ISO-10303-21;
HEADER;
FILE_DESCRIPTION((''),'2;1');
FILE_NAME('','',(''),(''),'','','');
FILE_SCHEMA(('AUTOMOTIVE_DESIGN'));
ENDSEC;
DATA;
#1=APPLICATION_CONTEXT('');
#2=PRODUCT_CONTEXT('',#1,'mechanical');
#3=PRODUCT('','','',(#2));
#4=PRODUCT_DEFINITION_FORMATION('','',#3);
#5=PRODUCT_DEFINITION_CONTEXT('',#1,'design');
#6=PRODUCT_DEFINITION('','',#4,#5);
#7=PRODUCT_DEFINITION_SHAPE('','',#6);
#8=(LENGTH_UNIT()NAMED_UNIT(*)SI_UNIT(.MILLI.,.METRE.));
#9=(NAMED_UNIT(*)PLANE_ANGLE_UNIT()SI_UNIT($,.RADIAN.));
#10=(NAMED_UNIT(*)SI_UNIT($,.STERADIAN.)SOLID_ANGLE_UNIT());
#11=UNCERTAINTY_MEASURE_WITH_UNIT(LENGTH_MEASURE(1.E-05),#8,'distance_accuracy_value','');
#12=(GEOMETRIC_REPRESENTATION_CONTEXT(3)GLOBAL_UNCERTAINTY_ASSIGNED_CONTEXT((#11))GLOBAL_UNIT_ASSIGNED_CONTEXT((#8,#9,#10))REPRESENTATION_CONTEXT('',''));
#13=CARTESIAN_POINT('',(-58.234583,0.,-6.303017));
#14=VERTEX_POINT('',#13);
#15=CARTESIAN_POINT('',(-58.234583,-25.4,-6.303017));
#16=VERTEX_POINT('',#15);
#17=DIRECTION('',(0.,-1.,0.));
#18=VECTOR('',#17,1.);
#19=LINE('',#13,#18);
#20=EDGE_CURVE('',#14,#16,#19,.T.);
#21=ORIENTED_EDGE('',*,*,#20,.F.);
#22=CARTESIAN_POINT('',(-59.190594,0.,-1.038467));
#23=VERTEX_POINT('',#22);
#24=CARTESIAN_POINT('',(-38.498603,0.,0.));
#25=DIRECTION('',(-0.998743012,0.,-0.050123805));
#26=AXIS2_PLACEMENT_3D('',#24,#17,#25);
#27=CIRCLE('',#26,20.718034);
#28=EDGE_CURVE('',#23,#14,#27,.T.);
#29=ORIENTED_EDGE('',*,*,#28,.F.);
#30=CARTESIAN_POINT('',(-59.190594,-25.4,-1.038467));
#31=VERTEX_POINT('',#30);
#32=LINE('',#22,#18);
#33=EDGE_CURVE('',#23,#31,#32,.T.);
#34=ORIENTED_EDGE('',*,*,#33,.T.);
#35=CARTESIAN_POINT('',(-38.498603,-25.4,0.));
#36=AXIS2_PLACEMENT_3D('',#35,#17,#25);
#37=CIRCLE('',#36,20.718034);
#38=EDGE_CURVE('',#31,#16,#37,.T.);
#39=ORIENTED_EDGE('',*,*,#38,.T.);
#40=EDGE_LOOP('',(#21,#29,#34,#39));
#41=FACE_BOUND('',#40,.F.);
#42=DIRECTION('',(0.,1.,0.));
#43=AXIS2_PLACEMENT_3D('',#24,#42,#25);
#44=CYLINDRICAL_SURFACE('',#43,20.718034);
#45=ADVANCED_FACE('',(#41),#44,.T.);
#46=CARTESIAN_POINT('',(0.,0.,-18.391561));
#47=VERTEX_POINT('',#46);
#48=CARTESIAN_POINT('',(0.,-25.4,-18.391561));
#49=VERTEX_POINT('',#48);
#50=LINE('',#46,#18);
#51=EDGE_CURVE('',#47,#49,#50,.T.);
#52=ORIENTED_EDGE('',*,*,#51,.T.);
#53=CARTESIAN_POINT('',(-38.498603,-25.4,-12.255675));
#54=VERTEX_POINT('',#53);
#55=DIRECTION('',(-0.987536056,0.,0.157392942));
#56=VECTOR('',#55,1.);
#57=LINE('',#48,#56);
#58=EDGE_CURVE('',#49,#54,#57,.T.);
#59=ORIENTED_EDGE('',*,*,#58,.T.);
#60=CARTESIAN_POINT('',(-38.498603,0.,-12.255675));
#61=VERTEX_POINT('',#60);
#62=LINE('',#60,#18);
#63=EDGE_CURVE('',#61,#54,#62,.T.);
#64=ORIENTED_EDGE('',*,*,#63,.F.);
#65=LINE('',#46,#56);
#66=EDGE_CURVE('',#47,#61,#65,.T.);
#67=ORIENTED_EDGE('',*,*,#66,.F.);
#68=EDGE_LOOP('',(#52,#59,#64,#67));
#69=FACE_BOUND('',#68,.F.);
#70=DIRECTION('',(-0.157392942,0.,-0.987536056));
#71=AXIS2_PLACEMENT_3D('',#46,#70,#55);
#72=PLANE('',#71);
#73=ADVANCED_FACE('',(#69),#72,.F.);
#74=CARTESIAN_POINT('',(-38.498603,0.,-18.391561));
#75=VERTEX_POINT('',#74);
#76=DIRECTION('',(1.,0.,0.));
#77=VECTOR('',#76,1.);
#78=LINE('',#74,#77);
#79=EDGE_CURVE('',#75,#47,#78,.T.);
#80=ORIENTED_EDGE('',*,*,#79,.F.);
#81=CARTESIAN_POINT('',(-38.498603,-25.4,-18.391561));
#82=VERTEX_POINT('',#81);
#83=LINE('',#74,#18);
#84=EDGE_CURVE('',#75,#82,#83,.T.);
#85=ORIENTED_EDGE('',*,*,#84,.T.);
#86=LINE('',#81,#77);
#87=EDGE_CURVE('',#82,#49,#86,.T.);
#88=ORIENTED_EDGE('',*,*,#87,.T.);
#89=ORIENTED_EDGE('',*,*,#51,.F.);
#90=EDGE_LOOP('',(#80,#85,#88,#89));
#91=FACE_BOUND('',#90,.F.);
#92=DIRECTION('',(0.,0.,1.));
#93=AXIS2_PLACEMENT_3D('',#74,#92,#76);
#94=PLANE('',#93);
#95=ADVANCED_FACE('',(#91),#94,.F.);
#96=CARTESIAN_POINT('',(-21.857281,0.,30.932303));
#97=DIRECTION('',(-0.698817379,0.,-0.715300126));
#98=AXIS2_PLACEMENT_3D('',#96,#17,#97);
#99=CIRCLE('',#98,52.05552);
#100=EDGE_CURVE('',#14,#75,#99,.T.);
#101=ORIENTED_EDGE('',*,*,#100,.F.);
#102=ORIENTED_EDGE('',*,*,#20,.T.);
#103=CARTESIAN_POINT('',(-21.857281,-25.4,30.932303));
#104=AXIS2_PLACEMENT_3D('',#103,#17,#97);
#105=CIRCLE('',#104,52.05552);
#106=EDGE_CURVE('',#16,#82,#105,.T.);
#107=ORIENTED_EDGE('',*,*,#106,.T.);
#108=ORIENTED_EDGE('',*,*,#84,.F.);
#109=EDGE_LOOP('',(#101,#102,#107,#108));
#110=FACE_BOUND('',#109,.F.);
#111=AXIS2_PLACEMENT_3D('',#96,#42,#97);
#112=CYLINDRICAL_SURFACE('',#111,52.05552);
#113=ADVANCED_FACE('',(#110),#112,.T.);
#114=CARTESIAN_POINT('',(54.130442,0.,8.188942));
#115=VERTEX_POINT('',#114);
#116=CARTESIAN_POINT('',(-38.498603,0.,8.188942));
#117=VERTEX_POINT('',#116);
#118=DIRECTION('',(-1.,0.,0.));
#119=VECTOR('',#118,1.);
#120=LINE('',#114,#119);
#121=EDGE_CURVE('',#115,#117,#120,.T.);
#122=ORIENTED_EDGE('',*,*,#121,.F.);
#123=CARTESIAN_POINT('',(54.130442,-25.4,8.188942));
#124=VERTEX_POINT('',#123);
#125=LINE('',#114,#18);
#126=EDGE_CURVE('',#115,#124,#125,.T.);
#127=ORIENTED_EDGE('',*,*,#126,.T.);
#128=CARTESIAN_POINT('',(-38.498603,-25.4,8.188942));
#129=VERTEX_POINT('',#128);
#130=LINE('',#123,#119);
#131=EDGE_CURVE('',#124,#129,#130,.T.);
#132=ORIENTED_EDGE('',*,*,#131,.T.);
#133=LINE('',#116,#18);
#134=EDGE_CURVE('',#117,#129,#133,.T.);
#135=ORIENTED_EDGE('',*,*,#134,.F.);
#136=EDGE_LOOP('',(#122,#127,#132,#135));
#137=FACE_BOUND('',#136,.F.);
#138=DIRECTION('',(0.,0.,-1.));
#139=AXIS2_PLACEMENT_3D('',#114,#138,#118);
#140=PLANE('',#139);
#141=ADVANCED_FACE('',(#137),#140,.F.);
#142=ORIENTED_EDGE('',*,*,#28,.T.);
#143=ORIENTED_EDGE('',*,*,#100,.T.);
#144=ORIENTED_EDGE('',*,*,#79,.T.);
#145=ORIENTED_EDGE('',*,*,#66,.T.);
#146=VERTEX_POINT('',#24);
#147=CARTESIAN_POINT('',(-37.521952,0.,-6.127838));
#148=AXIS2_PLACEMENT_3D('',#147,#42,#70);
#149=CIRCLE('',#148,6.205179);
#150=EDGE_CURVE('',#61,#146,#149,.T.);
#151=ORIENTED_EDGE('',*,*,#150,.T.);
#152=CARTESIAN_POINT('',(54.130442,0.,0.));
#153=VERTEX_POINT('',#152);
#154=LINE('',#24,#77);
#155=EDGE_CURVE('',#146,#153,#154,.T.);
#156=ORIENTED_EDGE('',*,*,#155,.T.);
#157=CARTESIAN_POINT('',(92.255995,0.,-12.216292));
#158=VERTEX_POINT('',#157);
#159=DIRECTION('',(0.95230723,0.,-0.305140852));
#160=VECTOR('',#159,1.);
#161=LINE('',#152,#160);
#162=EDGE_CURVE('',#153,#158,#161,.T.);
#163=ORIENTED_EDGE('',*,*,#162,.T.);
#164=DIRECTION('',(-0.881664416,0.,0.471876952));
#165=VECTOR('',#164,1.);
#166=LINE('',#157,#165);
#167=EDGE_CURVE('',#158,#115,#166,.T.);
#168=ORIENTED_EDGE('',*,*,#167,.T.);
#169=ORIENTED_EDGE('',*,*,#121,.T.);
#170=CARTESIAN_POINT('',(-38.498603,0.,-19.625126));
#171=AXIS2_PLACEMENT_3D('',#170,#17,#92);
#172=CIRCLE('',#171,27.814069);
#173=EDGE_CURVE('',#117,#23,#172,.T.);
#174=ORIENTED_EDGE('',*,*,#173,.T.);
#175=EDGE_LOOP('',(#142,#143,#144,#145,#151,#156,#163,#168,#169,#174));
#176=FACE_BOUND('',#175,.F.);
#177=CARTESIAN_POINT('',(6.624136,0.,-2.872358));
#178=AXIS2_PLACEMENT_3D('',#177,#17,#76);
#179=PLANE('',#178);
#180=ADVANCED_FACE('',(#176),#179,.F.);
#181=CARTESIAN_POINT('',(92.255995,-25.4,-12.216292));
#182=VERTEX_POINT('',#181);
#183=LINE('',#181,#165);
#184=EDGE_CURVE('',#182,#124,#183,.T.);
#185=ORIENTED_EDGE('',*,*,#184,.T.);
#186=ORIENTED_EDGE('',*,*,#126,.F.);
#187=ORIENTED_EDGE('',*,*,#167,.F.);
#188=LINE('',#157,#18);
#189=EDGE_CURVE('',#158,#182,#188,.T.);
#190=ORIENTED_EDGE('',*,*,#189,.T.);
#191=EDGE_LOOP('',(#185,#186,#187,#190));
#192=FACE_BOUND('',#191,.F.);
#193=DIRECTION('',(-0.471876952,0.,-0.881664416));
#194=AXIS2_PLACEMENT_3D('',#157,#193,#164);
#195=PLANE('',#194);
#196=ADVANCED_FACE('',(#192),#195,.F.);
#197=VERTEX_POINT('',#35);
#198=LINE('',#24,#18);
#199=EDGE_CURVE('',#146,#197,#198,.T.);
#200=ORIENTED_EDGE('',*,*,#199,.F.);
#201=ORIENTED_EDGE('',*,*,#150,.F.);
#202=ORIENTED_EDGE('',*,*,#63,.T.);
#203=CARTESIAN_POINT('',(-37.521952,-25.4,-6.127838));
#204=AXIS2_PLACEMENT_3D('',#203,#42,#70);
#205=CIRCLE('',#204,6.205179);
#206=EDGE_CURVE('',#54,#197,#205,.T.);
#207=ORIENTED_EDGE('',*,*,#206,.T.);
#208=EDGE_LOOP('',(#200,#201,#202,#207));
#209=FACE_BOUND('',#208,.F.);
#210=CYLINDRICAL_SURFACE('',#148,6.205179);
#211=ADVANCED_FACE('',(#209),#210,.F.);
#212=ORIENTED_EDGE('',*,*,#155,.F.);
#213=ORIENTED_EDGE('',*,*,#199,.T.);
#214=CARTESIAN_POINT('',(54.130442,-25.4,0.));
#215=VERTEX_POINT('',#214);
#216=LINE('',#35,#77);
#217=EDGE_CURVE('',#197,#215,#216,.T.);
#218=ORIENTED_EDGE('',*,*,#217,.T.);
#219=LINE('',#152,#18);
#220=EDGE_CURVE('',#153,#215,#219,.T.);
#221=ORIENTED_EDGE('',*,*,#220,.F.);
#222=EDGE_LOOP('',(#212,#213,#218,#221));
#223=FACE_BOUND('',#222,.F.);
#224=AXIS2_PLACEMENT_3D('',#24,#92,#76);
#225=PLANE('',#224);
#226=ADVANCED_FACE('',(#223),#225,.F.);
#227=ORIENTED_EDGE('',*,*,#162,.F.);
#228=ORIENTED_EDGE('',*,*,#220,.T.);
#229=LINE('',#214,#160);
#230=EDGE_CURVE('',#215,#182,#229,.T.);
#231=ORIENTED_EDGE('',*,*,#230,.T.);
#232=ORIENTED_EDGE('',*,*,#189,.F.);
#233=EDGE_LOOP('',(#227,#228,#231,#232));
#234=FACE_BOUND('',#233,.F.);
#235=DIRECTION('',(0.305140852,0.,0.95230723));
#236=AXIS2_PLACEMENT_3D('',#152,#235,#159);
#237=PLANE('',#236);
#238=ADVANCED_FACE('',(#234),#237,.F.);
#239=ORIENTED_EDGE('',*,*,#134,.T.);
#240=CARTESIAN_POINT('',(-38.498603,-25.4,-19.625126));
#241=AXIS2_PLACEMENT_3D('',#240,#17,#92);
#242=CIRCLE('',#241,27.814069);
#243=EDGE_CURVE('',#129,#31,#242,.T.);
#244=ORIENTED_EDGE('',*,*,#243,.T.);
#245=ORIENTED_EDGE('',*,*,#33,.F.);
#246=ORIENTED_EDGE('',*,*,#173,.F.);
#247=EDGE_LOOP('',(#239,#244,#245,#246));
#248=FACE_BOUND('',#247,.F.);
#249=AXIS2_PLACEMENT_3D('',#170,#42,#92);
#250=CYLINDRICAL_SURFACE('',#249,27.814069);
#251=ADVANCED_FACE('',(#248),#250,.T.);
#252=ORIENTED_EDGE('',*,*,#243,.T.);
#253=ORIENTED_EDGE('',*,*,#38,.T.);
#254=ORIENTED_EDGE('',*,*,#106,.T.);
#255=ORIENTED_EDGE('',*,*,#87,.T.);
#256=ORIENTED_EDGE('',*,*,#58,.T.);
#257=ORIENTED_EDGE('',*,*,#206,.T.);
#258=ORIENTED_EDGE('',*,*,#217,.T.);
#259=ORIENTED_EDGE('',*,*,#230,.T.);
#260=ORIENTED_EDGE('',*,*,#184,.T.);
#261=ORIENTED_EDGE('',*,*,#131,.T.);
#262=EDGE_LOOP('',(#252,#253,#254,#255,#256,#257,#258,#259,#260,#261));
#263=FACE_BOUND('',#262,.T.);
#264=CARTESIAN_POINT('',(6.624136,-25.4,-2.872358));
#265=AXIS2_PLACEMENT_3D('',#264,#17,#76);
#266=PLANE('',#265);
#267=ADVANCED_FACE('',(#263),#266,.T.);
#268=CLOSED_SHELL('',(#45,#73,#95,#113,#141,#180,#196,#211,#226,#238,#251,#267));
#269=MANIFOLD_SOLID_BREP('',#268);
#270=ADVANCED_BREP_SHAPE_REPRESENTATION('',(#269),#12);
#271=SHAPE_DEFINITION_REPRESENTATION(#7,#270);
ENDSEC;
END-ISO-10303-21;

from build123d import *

# Parameters (mm, degrees)
F1_DEPTH = 25.4


# Not quite as in the source:
# - the program builds the solid bodies; features that only make, move or delete a surface that nothing else refers to are left out


with BuildPart() as f1:
    # F0 (on Front) → F1 (new body)
    with BuildSketch(Plane.XZ):
        with BuildLine():
            Line((-38.4986028075, 0), (54.1304424405, 0))
            Line((54.1304424405, 0), (92.2559946775, -12.2162923217))
            Line((92.2559946775, -12.2162923217), (54.1304424405, 8.1889424473))
            Line((54.1304424405, 8.1889424473), (-38.4986028075, 8.1889424473))
            ThreePointArc((-38.4986028075, 8.1889424473), (-49.8267048533, 5.777561047), (-59.1905941264, -1.0384666745))
            ThreePointArc((-59.1905941264, -1.0384666745), (-58.8832559342, -3.7017340098), (-58.2345825442, -6.3030168658))
            ThreePointArc((-58.2345825442, -6.3030168658), (-49.0469266103, -13.4580145444), (-38.4986028075, -18.3915607631))
            Line((-38.4986028075, -18.3915607631), (0, -18.3915607631))
            Line((0, -18.3915607631), (-38.4986028075, -12.2556750716))
            ThreePointArc((-38.4986028075, -12.2556750716), (-43.7271300367, -6.1278375358), (-38.4986028075, 0))
        make_face()
    extrude(amount=F1_DEPTH)


solid = f1.part
